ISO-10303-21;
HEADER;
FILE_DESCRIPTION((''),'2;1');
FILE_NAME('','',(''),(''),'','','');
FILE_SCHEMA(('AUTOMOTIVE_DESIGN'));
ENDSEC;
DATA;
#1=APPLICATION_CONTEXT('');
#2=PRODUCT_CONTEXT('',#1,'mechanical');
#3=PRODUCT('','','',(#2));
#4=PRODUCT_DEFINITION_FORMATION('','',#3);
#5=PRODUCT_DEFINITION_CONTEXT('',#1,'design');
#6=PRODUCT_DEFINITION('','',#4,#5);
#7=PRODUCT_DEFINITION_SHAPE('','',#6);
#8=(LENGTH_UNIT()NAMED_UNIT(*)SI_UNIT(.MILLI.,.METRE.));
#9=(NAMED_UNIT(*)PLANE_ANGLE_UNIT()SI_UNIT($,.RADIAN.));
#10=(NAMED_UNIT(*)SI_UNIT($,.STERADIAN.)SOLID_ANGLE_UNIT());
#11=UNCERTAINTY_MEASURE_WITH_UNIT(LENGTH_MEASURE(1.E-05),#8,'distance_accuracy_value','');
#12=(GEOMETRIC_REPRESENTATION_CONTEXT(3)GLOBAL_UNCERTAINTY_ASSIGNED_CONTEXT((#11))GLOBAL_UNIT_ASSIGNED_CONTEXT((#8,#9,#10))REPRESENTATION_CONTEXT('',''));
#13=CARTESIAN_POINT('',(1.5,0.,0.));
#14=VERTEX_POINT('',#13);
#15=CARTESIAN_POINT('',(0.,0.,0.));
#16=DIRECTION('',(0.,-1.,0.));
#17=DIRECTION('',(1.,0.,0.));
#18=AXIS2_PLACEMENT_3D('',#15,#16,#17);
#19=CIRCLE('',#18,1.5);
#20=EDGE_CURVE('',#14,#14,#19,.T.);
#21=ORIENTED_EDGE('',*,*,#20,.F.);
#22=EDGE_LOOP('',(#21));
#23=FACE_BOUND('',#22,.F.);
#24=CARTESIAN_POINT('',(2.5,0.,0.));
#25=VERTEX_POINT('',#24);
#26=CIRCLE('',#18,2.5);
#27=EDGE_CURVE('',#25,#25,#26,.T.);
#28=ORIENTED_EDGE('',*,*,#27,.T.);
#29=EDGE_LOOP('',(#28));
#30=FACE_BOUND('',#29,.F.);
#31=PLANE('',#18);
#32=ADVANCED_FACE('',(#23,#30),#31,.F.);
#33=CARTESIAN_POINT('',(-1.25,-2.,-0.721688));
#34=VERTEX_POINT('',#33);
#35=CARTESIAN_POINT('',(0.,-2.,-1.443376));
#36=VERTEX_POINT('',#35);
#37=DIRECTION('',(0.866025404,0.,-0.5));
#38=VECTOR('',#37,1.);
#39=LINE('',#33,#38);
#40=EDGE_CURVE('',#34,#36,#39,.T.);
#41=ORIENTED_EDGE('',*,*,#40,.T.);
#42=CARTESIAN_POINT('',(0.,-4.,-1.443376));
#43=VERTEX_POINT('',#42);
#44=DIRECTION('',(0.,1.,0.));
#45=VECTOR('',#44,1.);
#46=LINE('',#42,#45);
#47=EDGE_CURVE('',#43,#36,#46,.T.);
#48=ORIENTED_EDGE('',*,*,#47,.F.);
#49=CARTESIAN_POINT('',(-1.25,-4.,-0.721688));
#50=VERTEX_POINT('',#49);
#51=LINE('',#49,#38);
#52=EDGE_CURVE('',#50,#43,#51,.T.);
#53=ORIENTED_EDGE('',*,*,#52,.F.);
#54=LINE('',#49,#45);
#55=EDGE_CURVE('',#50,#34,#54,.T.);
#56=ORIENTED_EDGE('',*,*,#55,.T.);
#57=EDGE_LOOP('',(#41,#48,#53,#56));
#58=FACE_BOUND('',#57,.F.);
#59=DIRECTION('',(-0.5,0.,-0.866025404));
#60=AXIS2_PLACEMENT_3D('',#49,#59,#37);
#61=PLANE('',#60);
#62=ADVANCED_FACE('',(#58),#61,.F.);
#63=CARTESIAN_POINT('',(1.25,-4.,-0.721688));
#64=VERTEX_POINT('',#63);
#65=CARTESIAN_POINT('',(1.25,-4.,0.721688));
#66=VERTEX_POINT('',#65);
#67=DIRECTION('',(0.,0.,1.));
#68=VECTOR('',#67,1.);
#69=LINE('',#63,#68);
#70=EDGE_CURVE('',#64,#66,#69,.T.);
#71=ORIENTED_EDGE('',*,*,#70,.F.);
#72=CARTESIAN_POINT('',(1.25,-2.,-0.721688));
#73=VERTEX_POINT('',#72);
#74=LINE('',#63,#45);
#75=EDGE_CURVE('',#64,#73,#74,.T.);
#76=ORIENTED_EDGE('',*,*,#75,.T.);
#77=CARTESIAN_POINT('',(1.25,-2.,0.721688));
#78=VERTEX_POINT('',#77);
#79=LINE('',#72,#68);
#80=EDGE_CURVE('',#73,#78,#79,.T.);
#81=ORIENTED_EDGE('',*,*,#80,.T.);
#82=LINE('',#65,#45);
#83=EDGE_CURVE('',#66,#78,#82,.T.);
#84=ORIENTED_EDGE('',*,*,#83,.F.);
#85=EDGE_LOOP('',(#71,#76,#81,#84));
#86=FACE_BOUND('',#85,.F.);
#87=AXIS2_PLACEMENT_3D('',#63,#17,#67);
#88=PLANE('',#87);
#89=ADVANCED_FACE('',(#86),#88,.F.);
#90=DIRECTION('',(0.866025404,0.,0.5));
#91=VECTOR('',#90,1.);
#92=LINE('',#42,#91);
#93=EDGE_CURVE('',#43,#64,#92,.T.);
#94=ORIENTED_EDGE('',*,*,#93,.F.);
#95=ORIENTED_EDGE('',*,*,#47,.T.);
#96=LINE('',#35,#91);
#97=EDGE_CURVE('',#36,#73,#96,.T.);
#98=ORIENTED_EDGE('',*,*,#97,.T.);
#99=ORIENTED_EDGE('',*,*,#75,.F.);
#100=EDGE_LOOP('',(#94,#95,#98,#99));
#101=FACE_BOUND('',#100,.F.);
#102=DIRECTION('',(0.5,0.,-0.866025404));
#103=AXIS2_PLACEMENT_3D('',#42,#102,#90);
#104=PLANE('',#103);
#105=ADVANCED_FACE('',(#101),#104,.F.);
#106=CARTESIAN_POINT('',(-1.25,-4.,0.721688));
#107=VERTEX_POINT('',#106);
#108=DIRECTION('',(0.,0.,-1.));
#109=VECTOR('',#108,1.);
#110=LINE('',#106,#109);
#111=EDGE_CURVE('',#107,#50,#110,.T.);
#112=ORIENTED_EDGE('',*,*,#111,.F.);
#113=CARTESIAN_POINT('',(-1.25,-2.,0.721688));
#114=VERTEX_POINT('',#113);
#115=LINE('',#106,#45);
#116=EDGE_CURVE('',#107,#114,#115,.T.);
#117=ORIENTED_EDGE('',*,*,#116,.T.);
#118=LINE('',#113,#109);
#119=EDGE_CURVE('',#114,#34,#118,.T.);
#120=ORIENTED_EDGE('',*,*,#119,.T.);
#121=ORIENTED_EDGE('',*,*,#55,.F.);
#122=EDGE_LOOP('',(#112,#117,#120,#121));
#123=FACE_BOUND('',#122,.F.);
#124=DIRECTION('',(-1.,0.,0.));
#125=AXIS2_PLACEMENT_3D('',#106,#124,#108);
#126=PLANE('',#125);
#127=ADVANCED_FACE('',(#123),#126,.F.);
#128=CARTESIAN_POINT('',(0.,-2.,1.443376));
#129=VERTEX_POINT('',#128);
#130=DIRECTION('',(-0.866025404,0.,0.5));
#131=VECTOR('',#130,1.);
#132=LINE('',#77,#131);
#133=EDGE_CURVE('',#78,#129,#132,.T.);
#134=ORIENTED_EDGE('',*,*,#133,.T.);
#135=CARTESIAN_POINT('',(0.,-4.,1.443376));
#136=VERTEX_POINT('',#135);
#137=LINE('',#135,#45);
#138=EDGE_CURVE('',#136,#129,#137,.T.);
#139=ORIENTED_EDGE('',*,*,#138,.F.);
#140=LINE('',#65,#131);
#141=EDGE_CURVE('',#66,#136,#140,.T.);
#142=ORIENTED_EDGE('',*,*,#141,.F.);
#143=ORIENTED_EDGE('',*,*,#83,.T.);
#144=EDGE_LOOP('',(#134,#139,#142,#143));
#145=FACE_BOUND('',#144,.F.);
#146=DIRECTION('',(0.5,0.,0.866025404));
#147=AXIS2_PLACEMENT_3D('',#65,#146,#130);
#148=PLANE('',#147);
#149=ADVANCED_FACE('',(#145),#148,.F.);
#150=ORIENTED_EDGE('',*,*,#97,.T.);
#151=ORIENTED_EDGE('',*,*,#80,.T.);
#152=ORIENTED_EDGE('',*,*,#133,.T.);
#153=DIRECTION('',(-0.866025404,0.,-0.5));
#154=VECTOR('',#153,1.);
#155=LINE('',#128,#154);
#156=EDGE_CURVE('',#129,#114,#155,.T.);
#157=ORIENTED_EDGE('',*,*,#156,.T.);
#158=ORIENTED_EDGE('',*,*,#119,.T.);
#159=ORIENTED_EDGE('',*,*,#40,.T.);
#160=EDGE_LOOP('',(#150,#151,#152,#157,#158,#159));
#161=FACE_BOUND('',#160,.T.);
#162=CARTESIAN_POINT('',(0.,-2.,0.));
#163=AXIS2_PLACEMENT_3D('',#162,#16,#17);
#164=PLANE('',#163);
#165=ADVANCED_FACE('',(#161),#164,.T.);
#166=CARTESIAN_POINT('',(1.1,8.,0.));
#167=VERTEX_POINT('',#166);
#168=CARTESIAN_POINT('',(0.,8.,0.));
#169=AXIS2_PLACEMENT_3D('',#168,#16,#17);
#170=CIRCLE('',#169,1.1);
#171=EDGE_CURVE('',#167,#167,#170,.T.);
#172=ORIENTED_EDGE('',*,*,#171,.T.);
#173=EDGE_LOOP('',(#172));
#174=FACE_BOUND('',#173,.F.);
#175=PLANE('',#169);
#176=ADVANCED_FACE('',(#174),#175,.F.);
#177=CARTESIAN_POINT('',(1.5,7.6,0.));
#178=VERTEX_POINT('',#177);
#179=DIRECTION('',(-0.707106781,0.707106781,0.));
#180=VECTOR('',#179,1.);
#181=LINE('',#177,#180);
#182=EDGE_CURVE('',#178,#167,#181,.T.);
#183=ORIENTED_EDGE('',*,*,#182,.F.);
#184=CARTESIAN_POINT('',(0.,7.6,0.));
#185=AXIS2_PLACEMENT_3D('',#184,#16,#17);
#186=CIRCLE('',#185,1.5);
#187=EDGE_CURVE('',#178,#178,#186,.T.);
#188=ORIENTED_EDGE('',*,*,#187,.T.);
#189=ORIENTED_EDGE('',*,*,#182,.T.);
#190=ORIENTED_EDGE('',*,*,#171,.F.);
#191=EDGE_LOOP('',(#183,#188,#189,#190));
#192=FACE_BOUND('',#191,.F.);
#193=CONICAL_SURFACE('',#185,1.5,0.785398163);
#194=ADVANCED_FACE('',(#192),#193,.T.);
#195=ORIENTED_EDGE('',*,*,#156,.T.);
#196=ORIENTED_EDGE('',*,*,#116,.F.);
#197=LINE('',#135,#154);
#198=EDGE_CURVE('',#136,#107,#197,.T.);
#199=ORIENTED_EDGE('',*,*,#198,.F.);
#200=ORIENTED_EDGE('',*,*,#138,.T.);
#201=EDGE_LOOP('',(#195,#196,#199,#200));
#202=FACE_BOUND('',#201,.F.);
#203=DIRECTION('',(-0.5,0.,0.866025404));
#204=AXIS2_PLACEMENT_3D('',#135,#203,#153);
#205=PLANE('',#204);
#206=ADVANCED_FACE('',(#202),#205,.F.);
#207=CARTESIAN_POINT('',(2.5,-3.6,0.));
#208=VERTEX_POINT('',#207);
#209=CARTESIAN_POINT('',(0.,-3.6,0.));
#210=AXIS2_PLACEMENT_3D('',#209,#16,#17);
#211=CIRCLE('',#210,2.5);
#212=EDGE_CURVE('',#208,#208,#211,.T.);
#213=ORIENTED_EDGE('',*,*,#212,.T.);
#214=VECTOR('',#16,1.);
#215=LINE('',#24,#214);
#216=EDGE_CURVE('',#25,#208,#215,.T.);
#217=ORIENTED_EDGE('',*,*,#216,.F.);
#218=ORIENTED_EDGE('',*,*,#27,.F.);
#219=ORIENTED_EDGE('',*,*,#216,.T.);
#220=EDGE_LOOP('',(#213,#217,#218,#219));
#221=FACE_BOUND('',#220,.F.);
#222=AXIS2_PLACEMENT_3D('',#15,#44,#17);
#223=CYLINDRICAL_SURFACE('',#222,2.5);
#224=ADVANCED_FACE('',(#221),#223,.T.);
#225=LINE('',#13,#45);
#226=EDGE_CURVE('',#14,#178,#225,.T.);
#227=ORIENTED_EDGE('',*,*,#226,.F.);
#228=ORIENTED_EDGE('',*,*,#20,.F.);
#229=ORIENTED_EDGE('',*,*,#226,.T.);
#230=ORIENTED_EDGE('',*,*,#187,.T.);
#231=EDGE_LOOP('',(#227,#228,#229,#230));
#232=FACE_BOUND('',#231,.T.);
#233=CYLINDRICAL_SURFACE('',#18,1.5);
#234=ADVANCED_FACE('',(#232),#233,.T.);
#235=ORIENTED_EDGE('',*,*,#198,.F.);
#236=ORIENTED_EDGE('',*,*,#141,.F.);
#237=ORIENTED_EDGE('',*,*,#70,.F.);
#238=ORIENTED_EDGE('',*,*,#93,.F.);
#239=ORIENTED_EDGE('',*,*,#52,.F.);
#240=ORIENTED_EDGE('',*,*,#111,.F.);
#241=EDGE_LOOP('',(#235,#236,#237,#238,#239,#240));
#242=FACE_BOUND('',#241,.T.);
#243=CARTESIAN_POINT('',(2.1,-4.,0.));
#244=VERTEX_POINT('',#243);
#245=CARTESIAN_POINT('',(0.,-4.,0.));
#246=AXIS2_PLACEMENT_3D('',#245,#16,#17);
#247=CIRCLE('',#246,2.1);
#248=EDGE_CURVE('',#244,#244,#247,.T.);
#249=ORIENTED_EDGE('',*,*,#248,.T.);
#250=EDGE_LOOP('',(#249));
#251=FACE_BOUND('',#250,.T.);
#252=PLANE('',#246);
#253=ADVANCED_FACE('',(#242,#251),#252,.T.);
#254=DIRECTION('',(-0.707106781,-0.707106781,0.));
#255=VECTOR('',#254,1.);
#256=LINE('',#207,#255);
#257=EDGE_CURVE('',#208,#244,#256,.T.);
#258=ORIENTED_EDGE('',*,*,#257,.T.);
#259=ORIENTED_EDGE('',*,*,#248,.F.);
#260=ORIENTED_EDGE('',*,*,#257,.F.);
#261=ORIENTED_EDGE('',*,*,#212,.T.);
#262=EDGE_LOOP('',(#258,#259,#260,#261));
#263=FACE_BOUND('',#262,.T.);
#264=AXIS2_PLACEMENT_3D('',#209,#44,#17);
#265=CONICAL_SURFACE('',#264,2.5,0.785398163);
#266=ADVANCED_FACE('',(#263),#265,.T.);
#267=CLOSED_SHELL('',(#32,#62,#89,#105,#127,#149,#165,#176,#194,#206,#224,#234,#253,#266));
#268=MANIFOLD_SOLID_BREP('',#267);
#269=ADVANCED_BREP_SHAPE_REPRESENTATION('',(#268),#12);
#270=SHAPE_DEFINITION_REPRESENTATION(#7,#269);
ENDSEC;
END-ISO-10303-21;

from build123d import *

# Parameters (mm, degrees)
F0_R     = 1.5
F1_DEPTH = 8
F0_R_2   = 2.5
F2_DEPTH = 4
F4_DEPTH = 2
F5_SIZE  = 0.4


# Not quite as in the source:
# - a feature names something its author has since deleted; it is built from what else it names


with BuildPart() as f1:
    # F0 (on Front) → F1 (new body)
    with BuildSketch(Plane.XZ):
        Circle(F0_R)
    extrude(amount=-F1_DEPTH)

    # F0 (on Front) → F2 (join)
    with BuildSketch(Plane.XZ):
        Circle(F0_R_2)
        Circle(F0_R, mode=Mode.SUBTRACT)
        Circle(F0_R)
    extrude(amount=F2_DEPTH)

    # F3 (on face) → F4 (cut)
    with BuildSketch(Plane.XZ.offset(4)):
        Polygon((1.25, -0.7216878365), (1.25, 0.7216878365), (0, 1.443375673), (-1.25, 0.7216878365), (-1.25, -0.7216878365), (0, -1.443375673), align=None)
    extrude(amount=-F4_DEPTH, mode=Mode.SUBTRACT)

    # F5
    f5_edges = [f1.edges().sort_by_distance(p)[0] for p in [
        (-2.5, -4, 0),
        (-1.5, 8, 0),
    ]]
    chamfer(f5_edges, length=F5_SIZE)


solid = f1.part
